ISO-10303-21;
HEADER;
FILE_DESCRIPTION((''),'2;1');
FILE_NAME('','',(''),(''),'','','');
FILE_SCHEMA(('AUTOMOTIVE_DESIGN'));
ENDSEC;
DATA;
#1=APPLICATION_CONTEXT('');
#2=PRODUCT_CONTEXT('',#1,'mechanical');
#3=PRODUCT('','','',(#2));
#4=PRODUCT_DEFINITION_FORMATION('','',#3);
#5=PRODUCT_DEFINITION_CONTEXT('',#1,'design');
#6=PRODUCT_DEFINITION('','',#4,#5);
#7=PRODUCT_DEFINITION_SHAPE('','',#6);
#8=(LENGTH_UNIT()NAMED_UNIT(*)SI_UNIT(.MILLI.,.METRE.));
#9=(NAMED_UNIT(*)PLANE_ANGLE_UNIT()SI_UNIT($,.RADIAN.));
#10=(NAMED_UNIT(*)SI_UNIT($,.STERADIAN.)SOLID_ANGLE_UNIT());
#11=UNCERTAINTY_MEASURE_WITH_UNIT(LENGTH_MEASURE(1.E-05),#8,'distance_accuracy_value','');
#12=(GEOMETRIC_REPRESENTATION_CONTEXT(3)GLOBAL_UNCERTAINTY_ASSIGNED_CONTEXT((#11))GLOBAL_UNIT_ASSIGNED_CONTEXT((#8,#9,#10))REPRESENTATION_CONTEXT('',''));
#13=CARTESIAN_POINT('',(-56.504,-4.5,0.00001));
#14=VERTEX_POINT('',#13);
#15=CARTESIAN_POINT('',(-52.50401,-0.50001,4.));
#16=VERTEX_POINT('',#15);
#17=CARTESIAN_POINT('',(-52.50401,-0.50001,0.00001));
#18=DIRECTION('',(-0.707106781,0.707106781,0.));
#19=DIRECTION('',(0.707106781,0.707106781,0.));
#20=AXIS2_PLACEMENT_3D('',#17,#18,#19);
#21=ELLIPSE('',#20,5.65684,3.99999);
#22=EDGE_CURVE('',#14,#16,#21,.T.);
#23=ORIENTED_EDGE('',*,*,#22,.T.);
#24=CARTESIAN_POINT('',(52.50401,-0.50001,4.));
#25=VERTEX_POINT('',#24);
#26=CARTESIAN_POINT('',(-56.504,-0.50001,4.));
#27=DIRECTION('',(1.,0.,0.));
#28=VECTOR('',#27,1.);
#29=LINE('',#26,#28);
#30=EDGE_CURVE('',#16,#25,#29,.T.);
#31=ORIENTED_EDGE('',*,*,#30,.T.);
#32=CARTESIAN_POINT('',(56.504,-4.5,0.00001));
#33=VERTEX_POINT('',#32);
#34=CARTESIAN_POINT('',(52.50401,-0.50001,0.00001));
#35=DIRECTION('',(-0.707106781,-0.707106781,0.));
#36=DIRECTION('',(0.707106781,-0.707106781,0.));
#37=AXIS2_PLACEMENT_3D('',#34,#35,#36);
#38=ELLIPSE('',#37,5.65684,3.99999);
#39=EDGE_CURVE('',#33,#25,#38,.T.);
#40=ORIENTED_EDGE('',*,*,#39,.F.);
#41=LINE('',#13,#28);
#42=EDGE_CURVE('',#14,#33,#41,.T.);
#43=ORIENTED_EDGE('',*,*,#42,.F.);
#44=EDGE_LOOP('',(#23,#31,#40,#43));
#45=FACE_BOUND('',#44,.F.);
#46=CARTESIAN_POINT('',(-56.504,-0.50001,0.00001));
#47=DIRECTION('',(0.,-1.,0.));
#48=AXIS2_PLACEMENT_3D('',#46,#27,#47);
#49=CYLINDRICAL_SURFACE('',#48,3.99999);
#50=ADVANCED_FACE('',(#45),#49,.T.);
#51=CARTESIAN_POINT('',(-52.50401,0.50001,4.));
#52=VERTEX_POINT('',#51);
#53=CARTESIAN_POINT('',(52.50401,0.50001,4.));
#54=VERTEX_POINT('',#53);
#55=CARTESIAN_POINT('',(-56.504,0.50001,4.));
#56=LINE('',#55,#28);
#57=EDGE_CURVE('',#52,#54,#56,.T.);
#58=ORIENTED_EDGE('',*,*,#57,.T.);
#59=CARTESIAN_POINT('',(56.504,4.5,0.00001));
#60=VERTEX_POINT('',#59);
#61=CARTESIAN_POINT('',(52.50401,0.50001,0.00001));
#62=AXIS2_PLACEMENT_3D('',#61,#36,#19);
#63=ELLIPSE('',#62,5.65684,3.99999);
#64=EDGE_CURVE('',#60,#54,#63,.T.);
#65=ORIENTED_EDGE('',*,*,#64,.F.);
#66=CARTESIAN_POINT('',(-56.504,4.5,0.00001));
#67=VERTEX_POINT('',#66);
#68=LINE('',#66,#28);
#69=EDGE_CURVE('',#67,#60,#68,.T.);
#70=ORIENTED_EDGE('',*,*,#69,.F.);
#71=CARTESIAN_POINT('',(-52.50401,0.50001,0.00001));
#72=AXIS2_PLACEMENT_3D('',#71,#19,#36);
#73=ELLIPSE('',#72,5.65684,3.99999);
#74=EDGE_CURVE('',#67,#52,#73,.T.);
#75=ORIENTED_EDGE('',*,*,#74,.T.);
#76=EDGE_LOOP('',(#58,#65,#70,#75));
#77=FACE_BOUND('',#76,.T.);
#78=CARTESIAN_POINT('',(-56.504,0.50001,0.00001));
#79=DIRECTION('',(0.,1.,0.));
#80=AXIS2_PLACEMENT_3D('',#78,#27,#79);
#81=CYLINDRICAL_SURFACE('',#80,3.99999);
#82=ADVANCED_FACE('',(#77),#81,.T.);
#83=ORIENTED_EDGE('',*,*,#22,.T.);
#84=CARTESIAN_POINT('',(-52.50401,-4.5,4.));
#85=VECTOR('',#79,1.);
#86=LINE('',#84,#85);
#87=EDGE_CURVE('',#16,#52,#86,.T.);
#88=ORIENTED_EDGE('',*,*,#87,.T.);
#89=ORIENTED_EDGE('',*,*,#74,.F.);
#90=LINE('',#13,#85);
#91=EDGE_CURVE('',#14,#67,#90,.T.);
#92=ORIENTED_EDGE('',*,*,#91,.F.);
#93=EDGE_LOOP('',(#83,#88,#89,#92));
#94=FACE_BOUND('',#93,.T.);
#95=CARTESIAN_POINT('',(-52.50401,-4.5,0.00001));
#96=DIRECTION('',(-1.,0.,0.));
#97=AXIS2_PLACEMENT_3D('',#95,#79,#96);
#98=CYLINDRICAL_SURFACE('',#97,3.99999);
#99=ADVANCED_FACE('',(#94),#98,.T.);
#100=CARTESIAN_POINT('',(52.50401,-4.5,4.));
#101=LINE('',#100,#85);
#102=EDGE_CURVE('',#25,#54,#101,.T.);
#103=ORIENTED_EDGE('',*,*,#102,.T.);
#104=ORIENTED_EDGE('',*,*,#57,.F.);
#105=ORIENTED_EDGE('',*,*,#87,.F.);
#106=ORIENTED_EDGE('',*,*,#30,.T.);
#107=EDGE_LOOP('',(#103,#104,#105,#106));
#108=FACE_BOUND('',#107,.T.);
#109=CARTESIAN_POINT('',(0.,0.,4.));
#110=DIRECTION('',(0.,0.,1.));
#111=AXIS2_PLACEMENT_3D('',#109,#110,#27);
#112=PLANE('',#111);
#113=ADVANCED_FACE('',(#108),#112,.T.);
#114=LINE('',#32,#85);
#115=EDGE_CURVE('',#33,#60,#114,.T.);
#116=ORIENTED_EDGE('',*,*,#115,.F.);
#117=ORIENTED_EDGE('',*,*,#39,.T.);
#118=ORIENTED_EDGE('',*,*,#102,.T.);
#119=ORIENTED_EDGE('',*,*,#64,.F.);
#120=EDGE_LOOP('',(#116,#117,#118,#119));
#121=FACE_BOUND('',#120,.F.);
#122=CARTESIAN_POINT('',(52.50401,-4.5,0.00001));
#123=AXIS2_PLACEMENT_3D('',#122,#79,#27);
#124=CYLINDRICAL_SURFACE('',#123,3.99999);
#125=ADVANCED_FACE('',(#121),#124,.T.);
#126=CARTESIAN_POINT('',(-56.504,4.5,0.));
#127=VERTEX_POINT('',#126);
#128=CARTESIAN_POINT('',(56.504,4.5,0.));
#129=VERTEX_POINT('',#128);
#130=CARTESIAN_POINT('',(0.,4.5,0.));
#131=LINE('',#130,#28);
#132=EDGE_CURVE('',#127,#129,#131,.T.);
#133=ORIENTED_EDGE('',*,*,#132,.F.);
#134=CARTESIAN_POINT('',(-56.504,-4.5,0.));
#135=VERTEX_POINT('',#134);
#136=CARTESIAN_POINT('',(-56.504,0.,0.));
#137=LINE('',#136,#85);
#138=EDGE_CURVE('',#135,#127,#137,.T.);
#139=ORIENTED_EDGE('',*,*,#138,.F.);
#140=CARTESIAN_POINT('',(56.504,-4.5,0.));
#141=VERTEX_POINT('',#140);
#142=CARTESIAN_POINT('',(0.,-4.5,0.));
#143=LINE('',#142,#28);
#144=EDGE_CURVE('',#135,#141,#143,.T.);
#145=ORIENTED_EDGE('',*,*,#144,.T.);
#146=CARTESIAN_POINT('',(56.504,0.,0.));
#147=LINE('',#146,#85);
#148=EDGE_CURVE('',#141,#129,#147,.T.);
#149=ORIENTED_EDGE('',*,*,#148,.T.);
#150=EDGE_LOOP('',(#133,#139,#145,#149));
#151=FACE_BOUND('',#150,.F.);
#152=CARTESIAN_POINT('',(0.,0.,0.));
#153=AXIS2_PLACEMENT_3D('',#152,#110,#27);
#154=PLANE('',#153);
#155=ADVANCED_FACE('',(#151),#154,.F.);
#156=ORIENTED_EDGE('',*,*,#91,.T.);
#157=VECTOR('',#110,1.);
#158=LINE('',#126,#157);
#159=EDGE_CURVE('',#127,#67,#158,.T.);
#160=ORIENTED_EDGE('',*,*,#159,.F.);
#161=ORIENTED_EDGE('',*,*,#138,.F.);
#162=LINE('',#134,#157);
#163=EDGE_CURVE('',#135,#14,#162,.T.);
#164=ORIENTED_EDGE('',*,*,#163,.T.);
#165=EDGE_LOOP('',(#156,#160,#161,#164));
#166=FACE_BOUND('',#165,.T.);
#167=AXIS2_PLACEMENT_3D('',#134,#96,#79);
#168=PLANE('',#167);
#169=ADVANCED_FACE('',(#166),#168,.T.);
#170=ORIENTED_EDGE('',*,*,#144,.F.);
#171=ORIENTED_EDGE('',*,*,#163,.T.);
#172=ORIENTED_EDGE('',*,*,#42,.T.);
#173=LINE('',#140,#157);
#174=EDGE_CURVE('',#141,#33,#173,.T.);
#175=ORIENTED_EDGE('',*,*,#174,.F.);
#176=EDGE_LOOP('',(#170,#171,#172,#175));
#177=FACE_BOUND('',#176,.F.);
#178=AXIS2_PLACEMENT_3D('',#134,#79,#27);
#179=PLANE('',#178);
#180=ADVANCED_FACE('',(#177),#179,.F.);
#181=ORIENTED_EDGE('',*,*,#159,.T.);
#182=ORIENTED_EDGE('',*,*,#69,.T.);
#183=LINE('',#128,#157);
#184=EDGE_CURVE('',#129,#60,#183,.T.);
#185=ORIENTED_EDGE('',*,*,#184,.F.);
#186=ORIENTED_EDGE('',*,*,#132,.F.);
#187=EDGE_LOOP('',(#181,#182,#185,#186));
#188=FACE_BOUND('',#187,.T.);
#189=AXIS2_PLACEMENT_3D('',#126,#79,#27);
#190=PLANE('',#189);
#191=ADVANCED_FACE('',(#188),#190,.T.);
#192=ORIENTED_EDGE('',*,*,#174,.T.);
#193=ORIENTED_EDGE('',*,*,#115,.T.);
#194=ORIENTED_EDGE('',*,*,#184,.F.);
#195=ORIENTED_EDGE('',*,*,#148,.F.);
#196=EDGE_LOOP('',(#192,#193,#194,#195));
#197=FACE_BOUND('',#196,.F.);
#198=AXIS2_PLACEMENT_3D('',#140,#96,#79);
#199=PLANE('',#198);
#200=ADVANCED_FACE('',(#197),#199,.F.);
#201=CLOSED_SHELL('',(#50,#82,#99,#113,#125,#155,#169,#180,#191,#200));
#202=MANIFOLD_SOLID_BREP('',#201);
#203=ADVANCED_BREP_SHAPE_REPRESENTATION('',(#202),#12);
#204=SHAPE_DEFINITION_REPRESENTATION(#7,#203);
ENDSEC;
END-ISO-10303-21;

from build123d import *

# Parameters (mm, degrees)
F0_W     = 113.008
F0_H     = 9
F1_DEPTH = 4
F2_R     = 3.99999


# Not quite as in the source:
# - a fillet or chamfer is up to 0.001 mm smaller than in the source, because OpenCascade refuses the exact size


with BuildPart() as f1:
    # F0 (on Top) → F1 (new body)
    with BuildSketch(Plane.XY):
        Rectangle(F0_W, F0_H)
    extrude(amount=F1_DEPTH)

    # F2 (radius 4 in the source; OpenCascade refuses exactly that, so slightly less here)
    f2_edges = [f1.edges().sort_by_distance(p)[0] for p in [
        (0, 4.5, 4),
        (0, -4.5, 4),
        (-56.504, 0, 4),
        (56.504, 0, 4),
    ]]
    fillet(f2_edges, radius=F2_R)


solid = f1.part
